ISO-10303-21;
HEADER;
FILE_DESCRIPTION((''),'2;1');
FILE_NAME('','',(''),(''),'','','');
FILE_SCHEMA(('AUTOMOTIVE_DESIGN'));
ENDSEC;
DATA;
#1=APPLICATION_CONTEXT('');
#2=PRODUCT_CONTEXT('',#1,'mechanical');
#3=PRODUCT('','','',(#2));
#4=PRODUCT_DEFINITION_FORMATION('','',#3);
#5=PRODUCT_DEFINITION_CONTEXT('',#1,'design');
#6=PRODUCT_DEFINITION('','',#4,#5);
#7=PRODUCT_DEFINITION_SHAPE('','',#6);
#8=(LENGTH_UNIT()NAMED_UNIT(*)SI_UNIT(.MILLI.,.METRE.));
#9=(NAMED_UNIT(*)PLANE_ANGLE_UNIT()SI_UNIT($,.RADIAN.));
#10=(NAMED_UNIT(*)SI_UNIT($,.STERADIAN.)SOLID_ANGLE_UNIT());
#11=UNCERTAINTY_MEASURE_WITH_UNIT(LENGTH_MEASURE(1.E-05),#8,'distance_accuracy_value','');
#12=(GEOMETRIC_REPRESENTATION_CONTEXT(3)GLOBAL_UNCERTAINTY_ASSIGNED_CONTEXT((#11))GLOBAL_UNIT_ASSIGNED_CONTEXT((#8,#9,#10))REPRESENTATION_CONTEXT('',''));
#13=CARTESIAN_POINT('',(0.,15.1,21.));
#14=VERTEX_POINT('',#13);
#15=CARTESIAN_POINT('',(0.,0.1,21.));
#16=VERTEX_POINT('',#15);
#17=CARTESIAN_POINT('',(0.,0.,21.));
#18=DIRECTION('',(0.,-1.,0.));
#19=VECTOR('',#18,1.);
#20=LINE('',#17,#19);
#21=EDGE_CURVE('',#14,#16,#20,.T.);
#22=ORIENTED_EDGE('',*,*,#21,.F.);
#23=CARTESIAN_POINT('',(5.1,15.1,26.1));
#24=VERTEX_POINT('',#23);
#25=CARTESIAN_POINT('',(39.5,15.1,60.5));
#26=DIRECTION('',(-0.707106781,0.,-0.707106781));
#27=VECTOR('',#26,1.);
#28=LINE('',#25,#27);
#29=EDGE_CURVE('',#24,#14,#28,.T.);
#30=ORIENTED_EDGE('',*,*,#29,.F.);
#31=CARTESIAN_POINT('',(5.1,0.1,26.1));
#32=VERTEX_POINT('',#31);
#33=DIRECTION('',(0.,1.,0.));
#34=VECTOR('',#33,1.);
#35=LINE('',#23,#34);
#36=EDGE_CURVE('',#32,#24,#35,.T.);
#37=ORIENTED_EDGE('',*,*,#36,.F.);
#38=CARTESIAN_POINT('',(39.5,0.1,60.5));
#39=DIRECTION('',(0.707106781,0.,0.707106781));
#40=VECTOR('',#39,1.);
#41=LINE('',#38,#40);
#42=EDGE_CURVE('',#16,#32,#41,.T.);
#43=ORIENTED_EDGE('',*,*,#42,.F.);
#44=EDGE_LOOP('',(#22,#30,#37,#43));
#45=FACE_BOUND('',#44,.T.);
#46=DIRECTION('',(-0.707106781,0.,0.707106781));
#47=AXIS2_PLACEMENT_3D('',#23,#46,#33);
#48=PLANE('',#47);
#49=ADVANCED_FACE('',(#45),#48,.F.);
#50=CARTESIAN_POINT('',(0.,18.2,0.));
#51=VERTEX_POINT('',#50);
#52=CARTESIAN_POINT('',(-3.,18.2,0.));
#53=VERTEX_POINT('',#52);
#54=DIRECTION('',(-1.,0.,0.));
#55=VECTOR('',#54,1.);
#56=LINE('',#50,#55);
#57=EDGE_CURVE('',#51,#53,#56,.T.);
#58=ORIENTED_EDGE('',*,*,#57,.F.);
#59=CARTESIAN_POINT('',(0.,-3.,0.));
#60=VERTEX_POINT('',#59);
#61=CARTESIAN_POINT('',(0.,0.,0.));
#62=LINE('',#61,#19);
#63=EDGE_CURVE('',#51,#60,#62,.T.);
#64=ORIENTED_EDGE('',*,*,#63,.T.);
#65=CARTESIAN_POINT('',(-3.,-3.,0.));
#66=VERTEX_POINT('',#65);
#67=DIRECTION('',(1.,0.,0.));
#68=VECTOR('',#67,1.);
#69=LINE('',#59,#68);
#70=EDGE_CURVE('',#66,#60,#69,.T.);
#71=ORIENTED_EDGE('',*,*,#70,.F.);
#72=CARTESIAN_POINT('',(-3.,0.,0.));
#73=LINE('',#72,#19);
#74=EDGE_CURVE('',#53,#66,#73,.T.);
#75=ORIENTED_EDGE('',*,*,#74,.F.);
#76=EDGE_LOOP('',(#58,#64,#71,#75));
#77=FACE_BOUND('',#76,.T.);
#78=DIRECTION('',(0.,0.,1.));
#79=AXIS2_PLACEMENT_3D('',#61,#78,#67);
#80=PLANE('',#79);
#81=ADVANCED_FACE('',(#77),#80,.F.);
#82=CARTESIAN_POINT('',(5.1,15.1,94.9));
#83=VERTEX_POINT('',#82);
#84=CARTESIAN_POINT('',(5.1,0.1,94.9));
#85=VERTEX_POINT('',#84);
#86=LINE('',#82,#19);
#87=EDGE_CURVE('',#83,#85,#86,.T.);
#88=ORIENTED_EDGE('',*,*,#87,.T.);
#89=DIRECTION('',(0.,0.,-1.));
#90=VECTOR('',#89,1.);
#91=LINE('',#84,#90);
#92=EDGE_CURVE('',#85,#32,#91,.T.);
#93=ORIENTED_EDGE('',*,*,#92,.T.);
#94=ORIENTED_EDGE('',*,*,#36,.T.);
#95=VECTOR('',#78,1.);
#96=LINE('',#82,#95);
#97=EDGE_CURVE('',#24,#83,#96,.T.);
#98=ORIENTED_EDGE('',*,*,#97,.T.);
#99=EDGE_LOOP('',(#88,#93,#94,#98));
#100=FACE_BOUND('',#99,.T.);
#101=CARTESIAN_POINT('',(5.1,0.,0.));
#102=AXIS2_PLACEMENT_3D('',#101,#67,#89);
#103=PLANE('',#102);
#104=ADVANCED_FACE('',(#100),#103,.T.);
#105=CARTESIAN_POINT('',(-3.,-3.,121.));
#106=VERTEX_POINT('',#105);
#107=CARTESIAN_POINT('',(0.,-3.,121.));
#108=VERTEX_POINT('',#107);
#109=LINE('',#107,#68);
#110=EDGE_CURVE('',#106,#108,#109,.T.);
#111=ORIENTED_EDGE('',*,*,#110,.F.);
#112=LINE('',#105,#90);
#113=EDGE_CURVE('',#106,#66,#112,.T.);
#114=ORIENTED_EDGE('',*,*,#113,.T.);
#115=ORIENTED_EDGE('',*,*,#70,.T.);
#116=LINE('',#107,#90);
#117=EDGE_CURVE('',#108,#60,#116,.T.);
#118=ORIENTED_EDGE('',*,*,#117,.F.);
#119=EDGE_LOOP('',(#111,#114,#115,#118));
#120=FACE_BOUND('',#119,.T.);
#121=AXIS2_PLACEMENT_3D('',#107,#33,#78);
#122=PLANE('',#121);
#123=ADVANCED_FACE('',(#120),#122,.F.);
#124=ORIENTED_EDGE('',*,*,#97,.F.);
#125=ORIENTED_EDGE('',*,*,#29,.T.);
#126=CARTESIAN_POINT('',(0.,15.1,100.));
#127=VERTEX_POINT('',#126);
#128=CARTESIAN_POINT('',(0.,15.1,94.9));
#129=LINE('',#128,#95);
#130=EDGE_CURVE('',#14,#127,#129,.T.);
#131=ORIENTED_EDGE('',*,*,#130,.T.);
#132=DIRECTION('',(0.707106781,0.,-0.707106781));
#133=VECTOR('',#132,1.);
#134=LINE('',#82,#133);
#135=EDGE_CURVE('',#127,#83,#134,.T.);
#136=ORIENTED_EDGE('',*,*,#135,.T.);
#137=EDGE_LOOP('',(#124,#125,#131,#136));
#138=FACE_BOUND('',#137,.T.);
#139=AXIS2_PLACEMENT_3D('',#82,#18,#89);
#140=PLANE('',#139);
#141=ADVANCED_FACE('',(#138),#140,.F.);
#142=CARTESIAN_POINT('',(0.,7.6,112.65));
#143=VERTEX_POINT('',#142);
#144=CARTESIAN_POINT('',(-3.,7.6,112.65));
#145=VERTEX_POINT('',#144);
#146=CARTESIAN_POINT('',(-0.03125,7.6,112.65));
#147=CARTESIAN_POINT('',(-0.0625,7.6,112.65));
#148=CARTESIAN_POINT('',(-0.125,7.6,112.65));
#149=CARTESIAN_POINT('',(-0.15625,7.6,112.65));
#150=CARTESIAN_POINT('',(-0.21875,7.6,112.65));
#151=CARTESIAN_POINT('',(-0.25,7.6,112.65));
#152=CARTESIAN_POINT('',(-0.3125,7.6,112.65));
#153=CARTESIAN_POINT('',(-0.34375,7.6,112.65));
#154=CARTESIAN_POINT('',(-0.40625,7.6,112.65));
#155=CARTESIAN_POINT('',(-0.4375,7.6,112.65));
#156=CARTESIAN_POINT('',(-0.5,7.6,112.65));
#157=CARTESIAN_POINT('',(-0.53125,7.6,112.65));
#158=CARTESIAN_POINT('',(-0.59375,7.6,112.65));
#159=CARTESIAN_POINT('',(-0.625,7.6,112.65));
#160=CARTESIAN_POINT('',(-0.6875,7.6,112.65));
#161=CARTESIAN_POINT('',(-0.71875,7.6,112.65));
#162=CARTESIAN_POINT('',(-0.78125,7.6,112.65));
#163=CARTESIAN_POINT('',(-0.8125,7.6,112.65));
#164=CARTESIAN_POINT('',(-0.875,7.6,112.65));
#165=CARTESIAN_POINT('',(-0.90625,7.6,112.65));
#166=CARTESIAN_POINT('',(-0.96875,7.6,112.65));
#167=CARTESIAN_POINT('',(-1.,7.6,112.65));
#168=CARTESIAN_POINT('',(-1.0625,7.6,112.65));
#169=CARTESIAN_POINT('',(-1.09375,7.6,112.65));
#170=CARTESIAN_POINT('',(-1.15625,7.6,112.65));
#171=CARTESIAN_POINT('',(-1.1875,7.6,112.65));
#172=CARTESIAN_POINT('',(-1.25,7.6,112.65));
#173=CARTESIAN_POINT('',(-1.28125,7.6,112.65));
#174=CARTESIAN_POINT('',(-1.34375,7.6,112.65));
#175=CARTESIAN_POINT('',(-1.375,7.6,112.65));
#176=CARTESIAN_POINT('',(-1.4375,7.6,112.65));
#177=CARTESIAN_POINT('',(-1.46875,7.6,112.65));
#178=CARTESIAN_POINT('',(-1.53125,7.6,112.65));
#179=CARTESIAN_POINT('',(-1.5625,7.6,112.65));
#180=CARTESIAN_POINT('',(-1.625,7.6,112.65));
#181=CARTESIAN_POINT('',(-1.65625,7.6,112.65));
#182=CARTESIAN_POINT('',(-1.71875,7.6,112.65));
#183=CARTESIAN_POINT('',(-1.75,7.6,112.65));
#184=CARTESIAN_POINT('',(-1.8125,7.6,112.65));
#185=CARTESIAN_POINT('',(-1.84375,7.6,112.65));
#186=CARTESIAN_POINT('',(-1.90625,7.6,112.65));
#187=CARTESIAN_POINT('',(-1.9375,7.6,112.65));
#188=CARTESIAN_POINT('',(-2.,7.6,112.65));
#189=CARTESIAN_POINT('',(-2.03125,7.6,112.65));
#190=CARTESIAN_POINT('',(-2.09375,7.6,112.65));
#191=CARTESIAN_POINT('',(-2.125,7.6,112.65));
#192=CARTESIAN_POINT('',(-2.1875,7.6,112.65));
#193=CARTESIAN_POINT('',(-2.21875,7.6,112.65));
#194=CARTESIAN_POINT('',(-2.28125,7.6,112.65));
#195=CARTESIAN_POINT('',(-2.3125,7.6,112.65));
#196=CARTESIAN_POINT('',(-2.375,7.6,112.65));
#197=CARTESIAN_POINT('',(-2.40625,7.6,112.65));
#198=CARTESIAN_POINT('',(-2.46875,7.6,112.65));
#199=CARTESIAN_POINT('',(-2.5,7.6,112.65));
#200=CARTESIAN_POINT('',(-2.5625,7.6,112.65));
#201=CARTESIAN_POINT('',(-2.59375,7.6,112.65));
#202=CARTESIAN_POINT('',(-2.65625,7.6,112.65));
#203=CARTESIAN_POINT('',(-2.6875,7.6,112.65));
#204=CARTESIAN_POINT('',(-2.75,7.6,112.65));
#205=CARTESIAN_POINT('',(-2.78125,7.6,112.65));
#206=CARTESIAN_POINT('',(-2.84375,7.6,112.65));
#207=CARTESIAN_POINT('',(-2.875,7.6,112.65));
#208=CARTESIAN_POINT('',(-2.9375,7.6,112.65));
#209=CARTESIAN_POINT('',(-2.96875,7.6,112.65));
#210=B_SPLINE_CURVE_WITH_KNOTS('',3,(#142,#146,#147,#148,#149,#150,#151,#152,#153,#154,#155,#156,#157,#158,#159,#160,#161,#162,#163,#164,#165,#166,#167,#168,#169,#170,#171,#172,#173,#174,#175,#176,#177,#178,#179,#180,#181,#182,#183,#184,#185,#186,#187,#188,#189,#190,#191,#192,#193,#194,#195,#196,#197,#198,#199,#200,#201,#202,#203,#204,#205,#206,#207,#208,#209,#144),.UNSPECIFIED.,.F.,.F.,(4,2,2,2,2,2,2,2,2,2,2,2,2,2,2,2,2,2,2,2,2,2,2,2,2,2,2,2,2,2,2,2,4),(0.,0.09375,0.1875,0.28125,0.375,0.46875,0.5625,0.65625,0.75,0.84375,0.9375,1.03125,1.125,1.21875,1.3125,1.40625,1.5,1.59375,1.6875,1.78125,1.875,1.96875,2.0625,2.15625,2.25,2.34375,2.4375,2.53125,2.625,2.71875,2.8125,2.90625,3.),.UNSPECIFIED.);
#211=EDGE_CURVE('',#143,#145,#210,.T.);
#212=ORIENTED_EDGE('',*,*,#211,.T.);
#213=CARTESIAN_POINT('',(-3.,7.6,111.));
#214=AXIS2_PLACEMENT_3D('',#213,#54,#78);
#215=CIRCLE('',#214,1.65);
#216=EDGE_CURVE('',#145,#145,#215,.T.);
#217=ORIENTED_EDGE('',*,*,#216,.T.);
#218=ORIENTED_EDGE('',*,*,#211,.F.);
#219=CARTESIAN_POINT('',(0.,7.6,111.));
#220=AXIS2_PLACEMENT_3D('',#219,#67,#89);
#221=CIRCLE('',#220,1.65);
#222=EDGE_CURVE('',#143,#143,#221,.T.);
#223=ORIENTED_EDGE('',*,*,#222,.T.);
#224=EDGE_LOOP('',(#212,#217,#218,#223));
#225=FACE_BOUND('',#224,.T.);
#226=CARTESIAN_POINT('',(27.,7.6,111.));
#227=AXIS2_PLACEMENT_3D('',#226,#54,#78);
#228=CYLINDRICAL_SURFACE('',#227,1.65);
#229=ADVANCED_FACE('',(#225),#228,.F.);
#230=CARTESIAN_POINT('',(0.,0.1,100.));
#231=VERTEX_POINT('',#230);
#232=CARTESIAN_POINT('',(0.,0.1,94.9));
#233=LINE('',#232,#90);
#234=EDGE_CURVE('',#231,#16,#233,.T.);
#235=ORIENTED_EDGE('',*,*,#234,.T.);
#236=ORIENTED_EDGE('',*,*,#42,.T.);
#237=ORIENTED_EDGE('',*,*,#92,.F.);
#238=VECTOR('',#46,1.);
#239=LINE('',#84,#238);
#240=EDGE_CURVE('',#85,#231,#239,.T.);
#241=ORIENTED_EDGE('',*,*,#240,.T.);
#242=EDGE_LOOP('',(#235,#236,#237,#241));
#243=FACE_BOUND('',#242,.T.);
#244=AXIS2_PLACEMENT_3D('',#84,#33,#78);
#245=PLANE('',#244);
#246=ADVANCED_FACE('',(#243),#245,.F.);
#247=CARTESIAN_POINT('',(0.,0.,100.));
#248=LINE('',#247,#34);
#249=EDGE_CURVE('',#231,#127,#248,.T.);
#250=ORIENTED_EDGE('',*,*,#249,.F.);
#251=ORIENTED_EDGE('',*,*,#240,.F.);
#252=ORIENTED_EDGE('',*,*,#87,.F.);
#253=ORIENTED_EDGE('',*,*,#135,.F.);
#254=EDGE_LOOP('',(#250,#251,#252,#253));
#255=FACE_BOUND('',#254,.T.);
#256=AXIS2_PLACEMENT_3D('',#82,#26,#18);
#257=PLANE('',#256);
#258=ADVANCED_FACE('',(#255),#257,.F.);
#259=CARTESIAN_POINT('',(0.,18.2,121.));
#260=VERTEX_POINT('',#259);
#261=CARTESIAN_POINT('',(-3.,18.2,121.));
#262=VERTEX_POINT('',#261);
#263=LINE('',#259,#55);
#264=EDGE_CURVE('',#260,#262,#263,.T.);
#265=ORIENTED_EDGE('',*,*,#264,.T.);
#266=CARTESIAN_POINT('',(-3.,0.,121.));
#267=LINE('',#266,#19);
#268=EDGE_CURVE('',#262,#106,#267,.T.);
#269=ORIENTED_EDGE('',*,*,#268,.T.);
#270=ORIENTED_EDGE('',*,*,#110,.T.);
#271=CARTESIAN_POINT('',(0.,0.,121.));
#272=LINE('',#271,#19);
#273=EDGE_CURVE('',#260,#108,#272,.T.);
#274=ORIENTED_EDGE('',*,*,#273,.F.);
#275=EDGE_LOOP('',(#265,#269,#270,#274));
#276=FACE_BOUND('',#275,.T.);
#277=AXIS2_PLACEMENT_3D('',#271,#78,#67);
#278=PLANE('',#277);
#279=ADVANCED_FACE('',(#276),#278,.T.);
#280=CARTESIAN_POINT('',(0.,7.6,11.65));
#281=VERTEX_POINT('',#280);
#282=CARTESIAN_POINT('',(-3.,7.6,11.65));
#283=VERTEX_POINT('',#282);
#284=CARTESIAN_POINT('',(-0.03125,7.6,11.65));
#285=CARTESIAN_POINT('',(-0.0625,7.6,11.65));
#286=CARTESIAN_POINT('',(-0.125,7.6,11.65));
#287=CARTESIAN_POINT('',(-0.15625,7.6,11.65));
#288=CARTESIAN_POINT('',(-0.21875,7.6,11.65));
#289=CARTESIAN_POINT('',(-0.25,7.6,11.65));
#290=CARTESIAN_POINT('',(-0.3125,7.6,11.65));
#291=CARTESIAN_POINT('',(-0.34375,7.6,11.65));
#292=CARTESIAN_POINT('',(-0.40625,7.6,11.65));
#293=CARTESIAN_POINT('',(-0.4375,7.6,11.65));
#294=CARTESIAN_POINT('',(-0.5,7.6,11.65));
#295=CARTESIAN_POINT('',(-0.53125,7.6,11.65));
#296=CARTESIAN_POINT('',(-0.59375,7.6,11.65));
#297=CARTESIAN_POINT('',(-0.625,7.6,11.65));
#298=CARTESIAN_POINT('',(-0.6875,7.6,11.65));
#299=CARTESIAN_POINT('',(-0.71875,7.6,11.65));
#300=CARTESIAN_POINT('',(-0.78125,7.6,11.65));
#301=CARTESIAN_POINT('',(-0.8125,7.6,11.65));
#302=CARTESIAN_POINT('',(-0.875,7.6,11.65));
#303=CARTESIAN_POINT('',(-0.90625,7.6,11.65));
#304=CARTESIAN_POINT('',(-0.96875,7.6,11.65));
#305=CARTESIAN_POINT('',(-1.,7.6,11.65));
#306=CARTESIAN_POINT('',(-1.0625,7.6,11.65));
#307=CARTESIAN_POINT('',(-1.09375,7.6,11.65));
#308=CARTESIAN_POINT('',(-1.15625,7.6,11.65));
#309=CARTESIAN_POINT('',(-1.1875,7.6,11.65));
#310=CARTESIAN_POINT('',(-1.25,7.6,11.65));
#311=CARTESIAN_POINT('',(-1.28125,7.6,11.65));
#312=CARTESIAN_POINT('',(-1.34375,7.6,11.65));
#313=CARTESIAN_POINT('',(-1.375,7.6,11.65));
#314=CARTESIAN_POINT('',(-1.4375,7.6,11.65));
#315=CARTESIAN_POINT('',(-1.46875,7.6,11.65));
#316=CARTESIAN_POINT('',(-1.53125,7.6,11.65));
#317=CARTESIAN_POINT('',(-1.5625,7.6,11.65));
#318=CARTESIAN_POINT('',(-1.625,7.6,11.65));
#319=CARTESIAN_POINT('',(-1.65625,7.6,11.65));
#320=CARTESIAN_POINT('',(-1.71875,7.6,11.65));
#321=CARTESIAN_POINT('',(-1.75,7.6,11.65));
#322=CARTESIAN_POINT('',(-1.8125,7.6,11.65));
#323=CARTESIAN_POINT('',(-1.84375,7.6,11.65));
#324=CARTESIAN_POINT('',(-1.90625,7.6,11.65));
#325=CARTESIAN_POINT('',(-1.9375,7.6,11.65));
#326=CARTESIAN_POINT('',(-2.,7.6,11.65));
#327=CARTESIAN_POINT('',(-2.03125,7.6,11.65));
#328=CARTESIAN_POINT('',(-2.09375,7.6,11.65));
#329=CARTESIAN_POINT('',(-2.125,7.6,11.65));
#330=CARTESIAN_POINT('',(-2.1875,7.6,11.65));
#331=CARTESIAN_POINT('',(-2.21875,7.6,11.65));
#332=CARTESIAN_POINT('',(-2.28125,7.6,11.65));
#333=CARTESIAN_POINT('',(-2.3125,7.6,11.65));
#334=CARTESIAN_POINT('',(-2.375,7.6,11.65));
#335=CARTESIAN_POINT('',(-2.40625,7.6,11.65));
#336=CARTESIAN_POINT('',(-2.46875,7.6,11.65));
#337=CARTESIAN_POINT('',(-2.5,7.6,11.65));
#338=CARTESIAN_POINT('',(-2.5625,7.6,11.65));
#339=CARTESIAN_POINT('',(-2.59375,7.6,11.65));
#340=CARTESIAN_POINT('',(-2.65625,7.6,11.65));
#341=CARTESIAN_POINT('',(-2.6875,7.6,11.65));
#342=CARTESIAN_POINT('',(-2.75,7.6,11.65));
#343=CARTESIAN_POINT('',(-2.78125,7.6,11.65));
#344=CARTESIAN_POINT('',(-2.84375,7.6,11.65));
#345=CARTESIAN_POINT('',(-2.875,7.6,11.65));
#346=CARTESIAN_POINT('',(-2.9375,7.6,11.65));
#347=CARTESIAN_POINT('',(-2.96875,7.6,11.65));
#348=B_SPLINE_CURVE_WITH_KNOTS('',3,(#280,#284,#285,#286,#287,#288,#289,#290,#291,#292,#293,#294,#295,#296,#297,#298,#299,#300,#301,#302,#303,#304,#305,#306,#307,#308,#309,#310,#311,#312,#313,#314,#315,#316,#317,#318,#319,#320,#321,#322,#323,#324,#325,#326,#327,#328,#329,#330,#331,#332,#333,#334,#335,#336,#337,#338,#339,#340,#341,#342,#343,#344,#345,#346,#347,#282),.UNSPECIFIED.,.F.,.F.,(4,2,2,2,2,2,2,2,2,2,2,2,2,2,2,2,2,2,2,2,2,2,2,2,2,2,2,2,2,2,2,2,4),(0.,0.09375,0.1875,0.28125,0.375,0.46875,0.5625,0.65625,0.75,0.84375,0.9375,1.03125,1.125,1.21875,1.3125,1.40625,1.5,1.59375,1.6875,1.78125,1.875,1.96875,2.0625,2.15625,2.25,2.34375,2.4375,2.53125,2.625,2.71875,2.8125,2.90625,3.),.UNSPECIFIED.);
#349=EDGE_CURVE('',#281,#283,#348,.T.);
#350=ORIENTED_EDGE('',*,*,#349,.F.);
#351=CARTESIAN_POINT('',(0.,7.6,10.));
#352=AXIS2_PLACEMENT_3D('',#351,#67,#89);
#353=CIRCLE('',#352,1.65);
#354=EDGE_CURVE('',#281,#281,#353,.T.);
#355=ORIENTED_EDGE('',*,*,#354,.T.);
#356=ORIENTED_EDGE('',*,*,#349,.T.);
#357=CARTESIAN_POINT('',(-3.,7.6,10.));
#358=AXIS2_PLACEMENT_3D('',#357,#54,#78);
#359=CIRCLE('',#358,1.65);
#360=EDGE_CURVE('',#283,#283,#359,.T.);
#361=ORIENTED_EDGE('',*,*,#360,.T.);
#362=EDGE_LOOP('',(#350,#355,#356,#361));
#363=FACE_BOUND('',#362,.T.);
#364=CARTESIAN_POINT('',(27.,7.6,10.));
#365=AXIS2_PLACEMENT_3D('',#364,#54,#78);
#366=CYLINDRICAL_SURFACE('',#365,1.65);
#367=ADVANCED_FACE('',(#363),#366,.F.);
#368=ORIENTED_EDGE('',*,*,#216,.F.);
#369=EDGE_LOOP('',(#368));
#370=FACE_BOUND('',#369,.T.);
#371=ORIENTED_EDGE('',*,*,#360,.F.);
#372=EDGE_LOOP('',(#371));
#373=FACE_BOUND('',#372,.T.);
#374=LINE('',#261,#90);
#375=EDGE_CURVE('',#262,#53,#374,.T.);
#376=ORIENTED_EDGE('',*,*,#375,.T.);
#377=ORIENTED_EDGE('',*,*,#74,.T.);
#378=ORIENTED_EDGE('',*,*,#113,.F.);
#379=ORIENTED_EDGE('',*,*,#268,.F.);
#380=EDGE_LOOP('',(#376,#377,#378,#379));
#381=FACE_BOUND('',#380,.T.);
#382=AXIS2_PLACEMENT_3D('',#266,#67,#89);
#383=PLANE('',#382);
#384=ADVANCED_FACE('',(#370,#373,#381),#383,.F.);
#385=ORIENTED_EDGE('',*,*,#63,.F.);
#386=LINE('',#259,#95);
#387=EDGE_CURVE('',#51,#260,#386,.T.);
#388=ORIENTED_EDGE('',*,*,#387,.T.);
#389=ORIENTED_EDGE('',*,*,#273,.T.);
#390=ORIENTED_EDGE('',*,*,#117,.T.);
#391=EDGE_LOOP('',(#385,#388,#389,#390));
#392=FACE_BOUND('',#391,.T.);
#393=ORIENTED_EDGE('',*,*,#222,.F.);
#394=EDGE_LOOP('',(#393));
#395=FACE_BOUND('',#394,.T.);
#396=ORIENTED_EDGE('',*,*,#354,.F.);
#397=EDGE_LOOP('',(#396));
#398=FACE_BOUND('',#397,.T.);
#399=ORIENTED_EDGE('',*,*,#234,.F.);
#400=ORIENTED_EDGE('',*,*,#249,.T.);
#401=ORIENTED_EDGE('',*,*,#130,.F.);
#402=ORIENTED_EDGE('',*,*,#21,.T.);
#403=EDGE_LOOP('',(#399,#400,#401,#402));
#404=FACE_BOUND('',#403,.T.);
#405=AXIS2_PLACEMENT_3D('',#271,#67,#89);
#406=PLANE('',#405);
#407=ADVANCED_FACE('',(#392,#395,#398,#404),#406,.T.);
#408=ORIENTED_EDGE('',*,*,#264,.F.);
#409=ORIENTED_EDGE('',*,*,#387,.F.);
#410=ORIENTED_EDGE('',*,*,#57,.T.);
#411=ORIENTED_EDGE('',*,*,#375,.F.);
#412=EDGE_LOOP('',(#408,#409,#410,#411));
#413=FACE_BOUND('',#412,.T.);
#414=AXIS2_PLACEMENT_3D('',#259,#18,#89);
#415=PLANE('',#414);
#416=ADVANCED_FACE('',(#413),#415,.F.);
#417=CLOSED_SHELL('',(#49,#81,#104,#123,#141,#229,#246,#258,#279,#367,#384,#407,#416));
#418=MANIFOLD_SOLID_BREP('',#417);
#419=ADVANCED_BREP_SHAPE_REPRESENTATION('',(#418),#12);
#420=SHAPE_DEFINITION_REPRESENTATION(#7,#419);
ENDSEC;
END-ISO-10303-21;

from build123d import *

# Parameters (mm, degrees)
SKETCH_1_W          = 21.2
SKETCH_1_H          = 21.2
SKETCH_1_W_2        = 15.2
SKETCH_1_H_2        = 15.2
EXTRUDE_1_DEPTH     = 121
SKETCH_2_R          = 1.65
CUT_EXTRUDE_1_DEPTH = 30
SKETCH_3_W          = 121
SKETCH_3_H          = 21.2
CUT_EXTRUDE_2_DEPTH = 18.2
SKETCH_4_W          = 68.8
SKETCH_4_H          = 15
EXTRUDE_1_2_DEPTH   = 5.1
CHAMFER_1_SIZE      = 5.1


with BuildPart() as part:
    # 草图1 → Extrude 1 (new body)
    with BuildSketch(Plane.XY):
        with Locations((7.6, 7.6)):
            Rectangle(SKETCH_1_W, SKETCH_1_H)
        with Locations((7.6, 7.6)):
            Rectangle(SKETCH_1_W_2, SKETCH_1_H_2, mode=Mode.SUBTRACT)
    extrude(amount=EXTRUDE_1_DEPTH)

    # 草图2 → 切除-拉伸1 (cut)
    with BuildSketch(Plane.ZY.offset(3)):
        with Locations((10, 7.6)):
            Circle(SKETCH_2_R)
        with Locations((111, 7.6)):
            Circle(SKETCH_2_R)
    extrude(amount=-CUT_EXTRUDE_1_DEPTH, mode=Mode.SUBTRACT)

    # 草图3 → 切除-拉伸2 (cut)
    with BuildSketch(Plane(origin=(18.2, 0, 0), x_dir=(0, 0, -1), z_dir=(1, 0, 0))):
        with Locations((-60.5, 7.6)):
            Rectangle(SKETCH_3_W, SKETCH_3_H)
    extrude(amount=-CUT_EXTRUDE_2_DEPTH, mode=Mode.SUBTRACT)

    # 草图4 → Extrude 1 2 (add)
    with BuildSketch(Plane(origin=(0, 0, 0), x_dir=(0, 0, -1), z_dir=(1, 0, 0))):
        with Locations((-60.5, 7.6)):
            Rectangle(SKETCH_4_W, SKETCH_4_H)
    extrude(amount=EXTRUDE_1_2_DEPTH)

    # 倒角1
    chamfer_1_edges = [part.edges().sort_by_distance(p)[0] for p in [
        (0, 7.6, 26.1),
        (0, 7.6, 94.9),
    ]]
    chamfer(chamfer_1_edges, length=CHAMFER_1_SIZE - 0.0001)  # a hair under: the kernel refuses the full size


solid = part.part
